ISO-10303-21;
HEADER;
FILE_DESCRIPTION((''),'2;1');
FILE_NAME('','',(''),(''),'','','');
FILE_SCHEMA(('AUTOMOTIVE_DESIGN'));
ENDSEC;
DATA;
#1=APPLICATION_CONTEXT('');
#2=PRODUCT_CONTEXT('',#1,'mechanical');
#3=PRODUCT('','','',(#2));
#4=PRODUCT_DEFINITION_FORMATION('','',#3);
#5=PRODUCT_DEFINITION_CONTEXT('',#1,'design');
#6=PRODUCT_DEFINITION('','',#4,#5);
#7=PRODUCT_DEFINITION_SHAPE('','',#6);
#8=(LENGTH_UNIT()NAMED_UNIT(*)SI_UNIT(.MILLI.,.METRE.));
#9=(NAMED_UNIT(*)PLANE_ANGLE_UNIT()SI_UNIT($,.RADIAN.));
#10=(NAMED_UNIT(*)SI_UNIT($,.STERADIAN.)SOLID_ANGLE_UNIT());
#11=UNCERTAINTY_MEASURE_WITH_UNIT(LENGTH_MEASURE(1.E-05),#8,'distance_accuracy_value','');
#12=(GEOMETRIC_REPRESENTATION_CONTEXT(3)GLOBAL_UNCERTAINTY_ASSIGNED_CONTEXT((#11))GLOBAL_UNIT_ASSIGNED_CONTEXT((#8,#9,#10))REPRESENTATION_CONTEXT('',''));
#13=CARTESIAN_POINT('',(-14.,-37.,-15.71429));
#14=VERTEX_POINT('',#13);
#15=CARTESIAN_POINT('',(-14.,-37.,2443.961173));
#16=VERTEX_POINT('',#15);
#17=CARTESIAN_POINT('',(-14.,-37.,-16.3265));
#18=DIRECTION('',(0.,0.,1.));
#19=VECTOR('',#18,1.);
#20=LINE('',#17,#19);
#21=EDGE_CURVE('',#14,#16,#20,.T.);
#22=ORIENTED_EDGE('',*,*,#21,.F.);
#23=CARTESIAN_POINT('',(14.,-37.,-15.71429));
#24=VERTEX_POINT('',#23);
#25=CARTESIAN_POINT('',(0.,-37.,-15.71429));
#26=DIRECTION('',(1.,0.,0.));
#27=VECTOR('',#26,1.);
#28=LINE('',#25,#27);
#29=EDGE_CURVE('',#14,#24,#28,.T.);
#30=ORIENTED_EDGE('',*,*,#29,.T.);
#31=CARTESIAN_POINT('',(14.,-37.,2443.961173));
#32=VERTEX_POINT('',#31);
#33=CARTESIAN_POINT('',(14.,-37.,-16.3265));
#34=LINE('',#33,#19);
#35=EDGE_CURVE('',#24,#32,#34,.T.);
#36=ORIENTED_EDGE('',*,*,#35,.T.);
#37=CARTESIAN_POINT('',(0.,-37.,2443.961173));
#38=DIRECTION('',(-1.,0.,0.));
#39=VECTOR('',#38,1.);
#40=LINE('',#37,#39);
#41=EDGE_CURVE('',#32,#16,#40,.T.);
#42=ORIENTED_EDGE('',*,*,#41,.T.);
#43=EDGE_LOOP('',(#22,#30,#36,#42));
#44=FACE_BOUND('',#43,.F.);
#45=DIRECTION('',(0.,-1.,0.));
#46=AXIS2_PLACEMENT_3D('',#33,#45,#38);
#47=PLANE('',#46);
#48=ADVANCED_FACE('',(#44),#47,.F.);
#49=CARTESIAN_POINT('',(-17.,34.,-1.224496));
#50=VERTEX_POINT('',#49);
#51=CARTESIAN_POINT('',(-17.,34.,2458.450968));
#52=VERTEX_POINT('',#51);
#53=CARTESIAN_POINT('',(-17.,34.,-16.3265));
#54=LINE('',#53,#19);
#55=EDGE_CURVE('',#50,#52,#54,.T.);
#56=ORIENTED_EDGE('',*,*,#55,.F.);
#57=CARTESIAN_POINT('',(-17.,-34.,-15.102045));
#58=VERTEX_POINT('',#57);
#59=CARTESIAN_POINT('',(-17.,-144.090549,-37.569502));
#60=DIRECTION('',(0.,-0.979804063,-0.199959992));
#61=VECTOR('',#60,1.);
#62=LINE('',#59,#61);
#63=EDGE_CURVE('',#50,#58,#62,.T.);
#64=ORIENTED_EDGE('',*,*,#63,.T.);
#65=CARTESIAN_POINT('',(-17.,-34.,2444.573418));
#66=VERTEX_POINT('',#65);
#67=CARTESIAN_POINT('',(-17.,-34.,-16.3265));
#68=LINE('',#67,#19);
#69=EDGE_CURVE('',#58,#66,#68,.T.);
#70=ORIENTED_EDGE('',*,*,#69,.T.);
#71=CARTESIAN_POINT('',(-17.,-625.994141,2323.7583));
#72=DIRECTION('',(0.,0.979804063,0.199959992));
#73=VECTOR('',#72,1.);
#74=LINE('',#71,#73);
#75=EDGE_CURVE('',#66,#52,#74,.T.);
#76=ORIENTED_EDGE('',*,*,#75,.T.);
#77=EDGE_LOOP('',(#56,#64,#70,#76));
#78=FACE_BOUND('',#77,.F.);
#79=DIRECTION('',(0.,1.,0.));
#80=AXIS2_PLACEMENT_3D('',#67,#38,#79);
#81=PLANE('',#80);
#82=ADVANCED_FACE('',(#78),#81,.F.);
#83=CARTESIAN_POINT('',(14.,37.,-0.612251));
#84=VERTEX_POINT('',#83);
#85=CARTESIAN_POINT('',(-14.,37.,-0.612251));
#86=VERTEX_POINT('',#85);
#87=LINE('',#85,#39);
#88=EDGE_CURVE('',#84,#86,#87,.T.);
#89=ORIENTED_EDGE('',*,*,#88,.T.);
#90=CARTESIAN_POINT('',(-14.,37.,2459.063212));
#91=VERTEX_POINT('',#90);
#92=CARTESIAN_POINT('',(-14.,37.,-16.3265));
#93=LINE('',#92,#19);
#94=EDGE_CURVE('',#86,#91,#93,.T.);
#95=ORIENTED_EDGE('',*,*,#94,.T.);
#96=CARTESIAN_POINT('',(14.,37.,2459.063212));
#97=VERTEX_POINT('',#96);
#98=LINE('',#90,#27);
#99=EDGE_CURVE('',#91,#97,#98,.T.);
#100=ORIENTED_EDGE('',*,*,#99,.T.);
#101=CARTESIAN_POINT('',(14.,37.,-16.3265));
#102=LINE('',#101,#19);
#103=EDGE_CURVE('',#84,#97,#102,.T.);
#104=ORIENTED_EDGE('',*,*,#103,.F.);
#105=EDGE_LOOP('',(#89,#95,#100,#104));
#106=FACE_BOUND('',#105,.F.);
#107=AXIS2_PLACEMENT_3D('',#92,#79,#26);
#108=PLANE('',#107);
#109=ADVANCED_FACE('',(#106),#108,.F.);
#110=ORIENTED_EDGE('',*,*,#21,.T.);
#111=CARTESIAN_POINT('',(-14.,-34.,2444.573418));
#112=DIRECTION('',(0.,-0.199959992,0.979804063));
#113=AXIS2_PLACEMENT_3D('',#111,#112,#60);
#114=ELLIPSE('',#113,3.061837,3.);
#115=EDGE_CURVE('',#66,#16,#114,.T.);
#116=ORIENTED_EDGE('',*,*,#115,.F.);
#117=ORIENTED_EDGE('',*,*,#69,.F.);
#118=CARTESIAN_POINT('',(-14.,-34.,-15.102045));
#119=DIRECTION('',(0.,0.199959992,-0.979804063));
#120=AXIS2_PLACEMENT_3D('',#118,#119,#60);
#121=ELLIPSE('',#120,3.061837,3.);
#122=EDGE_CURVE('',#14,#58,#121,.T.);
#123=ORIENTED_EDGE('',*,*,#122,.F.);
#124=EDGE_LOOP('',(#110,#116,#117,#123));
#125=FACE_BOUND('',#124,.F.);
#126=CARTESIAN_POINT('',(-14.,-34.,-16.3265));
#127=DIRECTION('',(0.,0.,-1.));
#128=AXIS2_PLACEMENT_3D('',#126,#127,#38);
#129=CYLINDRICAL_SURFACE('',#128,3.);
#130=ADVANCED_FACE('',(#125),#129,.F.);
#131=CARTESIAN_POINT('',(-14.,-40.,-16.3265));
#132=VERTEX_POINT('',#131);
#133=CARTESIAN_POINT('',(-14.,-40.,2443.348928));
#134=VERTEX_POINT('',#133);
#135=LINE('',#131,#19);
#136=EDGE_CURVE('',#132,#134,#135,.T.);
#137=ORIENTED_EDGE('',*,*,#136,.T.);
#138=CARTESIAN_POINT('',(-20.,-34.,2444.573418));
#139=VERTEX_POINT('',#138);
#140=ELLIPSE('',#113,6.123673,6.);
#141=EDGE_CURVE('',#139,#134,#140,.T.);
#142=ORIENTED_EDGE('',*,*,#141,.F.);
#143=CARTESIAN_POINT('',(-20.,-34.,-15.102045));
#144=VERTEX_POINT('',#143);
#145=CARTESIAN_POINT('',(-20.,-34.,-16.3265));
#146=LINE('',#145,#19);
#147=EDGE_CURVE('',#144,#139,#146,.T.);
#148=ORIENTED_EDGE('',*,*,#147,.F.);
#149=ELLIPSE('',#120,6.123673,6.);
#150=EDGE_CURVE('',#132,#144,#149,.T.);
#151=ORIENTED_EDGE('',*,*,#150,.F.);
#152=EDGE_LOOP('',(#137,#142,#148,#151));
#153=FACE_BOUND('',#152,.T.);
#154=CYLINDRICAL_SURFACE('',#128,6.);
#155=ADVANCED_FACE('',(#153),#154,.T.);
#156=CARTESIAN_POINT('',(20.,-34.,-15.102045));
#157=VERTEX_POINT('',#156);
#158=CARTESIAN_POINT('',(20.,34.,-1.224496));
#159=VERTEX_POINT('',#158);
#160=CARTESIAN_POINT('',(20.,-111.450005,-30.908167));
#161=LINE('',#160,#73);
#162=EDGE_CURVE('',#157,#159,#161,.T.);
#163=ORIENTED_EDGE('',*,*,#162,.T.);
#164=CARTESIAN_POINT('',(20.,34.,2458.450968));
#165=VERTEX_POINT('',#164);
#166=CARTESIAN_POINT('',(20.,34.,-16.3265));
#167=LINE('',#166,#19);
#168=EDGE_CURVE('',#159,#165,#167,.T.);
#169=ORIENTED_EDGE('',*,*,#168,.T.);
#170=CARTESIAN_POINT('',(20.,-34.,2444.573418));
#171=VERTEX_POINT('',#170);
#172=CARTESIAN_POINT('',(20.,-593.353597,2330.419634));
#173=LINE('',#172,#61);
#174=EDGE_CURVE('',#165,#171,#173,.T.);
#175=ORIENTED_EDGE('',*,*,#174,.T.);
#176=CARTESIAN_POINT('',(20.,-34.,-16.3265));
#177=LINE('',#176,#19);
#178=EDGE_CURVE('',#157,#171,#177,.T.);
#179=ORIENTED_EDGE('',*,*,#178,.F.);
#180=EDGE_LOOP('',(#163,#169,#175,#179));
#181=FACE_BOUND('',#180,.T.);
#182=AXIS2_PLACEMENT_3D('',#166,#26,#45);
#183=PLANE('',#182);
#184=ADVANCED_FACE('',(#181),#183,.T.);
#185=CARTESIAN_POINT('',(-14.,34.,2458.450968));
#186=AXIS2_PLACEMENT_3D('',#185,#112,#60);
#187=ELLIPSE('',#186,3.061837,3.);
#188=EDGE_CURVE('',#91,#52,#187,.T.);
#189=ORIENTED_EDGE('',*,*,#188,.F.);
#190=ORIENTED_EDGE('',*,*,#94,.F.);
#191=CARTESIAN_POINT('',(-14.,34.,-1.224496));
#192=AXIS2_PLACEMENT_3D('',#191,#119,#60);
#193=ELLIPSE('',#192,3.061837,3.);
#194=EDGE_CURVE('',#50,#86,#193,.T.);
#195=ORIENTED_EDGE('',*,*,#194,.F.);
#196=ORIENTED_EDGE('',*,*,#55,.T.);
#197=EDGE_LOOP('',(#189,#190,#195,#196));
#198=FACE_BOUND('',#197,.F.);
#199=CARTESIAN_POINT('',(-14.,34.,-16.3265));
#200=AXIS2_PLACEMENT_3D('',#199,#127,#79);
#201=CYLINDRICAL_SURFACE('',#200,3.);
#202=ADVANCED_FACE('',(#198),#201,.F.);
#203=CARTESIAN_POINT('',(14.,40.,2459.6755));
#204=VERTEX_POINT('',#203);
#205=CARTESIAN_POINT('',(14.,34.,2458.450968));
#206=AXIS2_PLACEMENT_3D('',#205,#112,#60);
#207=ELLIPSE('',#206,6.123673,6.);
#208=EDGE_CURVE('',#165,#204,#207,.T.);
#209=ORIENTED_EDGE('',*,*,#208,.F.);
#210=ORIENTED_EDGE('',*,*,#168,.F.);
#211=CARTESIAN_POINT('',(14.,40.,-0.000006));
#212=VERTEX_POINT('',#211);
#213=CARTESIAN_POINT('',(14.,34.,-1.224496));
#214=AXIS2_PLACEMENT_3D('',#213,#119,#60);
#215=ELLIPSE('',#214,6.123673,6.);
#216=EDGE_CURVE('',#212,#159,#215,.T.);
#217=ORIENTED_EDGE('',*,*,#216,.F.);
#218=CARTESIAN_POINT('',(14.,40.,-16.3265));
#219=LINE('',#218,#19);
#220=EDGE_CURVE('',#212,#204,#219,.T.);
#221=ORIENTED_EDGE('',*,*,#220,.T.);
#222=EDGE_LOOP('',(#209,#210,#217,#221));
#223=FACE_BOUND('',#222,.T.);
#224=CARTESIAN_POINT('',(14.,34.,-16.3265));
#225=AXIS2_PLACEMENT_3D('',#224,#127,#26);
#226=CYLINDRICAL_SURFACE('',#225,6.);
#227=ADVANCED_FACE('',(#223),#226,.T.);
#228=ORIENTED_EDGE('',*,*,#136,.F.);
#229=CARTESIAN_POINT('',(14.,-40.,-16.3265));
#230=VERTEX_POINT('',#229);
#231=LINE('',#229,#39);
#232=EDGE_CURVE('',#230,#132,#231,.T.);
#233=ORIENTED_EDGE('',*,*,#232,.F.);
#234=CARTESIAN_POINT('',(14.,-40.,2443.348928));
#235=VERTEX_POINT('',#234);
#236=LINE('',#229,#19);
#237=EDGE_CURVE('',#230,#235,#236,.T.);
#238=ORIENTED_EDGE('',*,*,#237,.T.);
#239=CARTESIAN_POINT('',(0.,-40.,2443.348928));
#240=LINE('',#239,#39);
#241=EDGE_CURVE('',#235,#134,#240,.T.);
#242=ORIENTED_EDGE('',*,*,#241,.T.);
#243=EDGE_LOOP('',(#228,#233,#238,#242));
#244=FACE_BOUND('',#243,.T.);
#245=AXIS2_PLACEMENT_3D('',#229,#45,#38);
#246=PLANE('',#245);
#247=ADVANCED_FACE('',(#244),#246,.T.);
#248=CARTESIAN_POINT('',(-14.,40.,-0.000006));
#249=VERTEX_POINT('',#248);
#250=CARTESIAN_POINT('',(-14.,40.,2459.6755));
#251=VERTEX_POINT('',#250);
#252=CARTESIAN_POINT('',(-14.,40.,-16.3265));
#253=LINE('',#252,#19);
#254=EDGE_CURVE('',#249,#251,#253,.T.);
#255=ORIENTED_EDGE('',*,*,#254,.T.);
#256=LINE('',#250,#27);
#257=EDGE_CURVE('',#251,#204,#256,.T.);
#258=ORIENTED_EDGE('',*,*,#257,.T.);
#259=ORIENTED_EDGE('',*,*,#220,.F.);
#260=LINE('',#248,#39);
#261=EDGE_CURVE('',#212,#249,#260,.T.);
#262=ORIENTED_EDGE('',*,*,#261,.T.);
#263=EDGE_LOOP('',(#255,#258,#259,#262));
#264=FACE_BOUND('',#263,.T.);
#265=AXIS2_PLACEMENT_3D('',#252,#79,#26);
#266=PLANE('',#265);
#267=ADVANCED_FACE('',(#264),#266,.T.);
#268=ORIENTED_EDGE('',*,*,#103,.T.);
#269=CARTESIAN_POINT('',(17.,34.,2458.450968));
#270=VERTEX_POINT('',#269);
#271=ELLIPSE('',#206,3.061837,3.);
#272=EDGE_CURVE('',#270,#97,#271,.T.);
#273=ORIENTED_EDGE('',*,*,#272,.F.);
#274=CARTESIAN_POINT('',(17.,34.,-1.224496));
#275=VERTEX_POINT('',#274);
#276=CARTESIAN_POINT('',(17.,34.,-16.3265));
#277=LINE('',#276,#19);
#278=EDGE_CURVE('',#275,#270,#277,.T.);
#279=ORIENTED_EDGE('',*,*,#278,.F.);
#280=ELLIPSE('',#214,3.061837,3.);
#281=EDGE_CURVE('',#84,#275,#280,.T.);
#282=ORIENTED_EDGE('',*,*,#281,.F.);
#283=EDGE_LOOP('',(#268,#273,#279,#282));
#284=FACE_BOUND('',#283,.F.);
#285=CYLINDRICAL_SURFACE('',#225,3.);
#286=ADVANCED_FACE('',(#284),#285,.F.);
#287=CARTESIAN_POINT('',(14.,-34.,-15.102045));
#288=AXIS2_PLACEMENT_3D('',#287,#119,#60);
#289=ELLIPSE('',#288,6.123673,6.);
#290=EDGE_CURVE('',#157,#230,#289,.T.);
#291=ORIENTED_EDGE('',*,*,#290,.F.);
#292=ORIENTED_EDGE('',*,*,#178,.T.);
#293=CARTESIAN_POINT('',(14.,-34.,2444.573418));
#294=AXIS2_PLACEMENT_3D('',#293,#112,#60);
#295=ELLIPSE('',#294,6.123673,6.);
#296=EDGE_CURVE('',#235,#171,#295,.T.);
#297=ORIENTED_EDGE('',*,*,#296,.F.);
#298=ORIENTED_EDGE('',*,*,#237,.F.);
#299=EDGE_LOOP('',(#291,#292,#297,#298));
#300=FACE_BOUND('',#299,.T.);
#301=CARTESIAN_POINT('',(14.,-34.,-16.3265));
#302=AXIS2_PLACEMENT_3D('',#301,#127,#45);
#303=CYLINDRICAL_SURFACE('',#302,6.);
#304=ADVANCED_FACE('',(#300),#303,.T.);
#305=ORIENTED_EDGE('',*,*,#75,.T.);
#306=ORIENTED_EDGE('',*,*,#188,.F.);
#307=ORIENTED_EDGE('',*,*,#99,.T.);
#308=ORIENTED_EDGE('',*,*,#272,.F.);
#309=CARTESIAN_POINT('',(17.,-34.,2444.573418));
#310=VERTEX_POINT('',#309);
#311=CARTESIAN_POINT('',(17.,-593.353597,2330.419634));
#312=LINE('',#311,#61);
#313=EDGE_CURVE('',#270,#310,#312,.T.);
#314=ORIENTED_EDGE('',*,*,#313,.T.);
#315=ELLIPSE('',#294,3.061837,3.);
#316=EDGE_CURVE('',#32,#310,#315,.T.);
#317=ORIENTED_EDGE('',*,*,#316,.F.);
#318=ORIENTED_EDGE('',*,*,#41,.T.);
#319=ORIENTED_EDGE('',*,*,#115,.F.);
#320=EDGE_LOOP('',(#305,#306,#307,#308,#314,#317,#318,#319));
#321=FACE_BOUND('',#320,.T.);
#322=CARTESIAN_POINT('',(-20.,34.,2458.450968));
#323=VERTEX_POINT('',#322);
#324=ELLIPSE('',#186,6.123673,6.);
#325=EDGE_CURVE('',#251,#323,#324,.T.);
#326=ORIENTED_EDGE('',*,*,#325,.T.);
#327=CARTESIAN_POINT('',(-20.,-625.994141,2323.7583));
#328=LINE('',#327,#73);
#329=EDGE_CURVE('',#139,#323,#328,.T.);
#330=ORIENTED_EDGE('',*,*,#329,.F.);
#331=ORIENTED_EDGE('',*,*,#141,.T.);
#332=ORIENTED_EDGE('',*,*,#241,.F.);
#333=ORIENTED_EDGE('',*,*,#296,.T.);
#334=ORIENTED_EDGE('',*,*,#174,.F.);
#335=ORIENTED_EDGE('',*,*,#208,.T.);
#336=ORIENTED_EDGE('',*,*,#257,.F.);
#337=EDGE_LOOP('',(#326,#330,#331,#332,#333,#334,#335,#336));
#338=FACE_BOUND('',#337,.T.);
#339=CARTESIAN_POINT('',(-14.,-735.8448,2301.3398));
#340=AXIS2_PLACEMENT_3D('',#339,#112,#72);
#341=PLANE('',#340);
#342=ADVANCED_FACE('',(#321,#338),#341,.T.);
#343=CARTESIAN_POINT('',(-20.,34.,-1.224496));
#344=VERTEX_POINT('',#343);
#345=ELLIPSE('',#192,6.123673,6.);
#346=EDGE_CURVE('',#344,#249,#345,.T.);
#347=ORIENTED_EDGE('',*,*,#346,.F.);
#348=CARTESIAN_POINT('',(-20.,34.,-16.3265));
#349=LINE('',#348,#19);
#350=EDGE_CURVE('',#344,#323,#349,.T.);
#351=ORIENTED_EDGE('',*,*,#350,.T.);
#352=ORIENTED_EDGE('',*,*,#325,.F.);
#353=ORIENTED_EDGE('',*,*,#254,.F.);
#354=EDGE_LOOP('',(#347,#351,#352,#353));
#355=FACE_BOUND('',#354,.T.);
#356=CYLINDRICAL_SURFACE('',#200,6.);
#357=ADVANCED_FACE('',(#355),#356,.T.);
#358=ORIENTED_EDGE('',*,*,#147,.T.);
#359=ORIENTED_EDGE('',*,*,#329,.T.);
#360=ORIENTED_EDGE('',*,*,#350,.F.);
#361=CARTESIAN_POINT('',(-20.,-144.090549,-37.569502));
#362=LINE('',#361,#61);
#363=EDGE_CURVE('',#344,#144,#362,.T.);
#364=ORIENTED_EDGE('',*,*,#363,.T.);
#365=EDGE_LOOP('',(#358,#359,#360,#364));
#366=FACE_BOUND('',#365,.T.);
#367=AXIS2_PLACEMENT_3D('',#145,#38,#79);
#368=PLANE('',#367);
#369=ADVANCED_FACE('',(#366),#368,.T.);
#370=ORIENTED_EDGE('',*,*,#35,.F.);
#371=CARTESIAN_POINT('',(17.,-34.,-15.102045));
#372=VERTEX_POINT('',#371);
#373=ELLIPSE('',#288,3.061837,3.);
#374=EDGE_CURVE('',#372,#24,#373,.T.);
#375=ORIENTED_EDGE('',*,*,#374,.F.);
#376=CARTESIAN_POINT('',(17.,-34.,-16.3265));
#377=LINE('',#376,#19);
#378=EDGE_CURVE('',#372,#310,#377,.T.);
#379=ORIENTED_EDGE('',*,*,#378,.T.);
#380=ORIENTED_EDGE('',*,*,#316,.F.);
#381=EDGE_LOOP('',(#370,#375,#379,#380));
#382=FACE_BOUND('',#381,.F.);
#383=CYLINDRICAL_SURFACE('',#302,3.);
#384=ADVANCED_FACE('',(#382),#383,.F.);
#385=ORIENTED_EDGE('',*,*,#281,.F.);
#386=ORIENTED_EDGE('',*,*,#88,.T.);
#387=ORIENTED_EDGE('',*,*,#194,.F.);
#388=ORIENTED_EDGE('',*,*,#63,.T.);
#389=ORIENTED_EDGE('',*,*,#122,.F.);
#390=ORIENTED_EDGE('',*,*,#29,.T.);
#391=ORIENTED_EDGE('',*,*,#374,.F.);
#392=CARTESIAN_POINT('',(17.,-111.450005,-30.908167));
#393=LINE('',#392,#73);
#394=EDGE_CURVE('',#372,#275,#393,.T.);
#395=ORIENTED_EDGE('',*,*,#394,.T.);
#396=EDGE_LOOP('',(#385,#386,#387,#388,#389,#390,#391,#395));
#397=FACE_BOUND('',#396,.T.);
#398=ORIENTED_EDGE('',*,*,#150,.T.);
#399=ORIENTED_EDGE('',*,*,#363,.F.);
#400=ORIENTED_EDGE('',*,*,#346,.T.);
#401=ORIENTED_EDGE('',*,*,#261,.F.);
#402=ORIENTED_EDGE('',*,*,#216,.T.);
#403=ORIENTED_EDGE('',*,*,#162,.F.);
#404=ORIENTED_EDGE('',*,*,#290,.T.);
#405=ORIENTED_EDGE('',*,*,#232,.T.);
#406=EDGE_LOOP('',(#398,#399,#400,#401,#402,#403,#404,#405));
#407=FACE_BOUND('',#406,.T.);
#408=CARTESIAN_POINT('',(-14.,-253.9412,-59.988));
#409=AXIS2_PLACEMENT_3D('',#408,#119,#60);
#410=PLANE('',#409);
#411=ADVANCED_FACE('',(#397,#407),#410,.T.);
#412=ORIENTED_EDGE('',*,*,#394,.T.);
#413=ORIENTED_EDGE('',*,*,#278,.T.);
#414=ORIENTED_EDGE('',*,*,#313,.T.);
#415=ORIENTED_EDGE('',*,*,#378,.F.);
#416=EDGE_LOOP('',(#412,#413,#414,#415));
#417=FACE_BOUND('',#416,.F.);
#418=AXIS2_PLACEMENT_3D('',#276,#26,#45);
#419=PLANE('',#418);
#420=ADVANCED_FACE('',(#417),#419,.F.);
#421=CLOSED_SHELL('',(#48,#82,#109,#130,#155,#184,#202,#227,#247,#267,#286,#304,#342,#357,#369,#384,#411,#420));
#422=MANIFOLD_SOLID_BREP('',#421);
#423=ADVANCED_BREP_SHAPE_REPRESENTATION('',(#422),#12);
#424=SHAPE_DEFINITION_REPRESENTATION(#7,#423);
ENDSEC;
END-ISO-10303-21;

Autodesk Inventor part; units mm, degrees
ref_plane "Start Plane" through (0, 0, -16.3265) normal (0, 0, 1) x (1, 0, 0)
ref_plane "End Plane" through (0, 0, 2459.6755) normal (0, 0, 1) x (1, 0, 0)
sketch "Sketch" plane through (0, 0, 0) normal (0, 0, 1) x (1, 0, 0)
  line L0 (-20, -34) -> (-20, 34)
  line L1 (-14, 40) -> (14, 40)
  line L2 (20, 34) -> (20, -34)
  line L3 (14, -40) -> (-14, -40)
  arc A0 (-20, -34) -> (-14, -40) centre (-14, -34) ccw
  arc A1 (20, 34) -> (14, 40) centre (14, 34) ccw
  arc A2 (-14, 40) -> (-20, 34) centre (-14, 34) ccw
  arc A3 (14, -40) -> (20, -34) centre (14, -34) ccw
  arc A4 (-14, 37) -> (-17, 34) centre (-14, 34) ccw
  line L4 (-14, 37) -> (14, 37)
  arc A5 (17, 34) -> (14, 37) centre (14, 34) ccw
  line L5 (17, 34) -> (17, -34)
  arc A6 (14, -37) -> (17, -34) centre (14, -34) ccw
  line L6 (14, -37) -> (-14, -37)
  arc A7 (-17, -34) -> (-14, -37) centre (-14, -34) ccw
  line L7 (-17, -34) -> (-17, 34)
  line L8 (0, 57.7397) -> (0, -57.7397) construction
  line L9 (-29.7397, 0) -> (29.7397, 0) construction
  dimension "d7" = 6
  dimension "d9" = 40
  dimension "d11" = 80
  dimension "d12" = 3
  dimension "d15" = 20
  dimension "d16" = 40
extrude "Body" add sketch "Sketch" along normal up to surface (2476.002 mm away) from surface at -16.3265
sketch "Sketch3" plane through (0, 0, 0) normal (0, 0, 1) x (1, 0, 0)
  line L0 (0, 0) -> (10, 0)
ref_plane "Work Plane3" through (0, 0, 0) normal (0, -1, 0) x (1, 0, 0)
ref_plane "Work Plane4" through (-14, -253.9412, -59.988) normal (0, 0.19996, -0.9798041) x (1, 0, 0)
split "Split1" plane through (-14, -253.9412, -59.988) removes the side toward (0, 0.19996, -0.9798041)
ref_plane "Work Plane5" through (-14, -735.8448, 2301.3398) normal (0, -0.19996, 0.9798041) x (1, 0, 0)
split "Split2" plane through (-14, -735.8448, 2301.3398) removes the side toward (0, -0.19996, 0.9798041)
sketch "Sketch4" plane through (0, 0, 0) normal (0, -1, 0) x (1, 0, 0)
  line L0 (-2, -16.3265) -> (12, -16.3265) projected
  line L1 (-2, 2459.6755) -> (12, 2459.6755) projected
  dimension "d18" = 2476.002
equation "\"d7\" = G_IR"
equation "\"d9\" = G_W"
equation "\"d11\" = G_H"
equation "\"d12\" = G_T"
equation "\"d15\" = 0.5 * d9"
equation "\"d16\" = 0.5 * d11"
equation "\"d3\" = G_L"
equation "\"G_W\" = 40"
equation "\"G_H\" = 80"
equation "\"G_T\" = 3"
equation "\"G_IR\" = 6"
equation "\"G_L\" = d18"
equation "\"G_OFFSET_START\" = 16.32653"
equation "\"G_OFFSET_END\" = -40.82449"
equation "\"d13\" = -G_OFFSET_START"
equation "\"d14\" = G_OFFSET_END + B_L"
equation "\"B_L\" = 2500.49995"
properties part number "ISO 10799-2 - 80x40x3 - 2476" material "Steel, Mild"
